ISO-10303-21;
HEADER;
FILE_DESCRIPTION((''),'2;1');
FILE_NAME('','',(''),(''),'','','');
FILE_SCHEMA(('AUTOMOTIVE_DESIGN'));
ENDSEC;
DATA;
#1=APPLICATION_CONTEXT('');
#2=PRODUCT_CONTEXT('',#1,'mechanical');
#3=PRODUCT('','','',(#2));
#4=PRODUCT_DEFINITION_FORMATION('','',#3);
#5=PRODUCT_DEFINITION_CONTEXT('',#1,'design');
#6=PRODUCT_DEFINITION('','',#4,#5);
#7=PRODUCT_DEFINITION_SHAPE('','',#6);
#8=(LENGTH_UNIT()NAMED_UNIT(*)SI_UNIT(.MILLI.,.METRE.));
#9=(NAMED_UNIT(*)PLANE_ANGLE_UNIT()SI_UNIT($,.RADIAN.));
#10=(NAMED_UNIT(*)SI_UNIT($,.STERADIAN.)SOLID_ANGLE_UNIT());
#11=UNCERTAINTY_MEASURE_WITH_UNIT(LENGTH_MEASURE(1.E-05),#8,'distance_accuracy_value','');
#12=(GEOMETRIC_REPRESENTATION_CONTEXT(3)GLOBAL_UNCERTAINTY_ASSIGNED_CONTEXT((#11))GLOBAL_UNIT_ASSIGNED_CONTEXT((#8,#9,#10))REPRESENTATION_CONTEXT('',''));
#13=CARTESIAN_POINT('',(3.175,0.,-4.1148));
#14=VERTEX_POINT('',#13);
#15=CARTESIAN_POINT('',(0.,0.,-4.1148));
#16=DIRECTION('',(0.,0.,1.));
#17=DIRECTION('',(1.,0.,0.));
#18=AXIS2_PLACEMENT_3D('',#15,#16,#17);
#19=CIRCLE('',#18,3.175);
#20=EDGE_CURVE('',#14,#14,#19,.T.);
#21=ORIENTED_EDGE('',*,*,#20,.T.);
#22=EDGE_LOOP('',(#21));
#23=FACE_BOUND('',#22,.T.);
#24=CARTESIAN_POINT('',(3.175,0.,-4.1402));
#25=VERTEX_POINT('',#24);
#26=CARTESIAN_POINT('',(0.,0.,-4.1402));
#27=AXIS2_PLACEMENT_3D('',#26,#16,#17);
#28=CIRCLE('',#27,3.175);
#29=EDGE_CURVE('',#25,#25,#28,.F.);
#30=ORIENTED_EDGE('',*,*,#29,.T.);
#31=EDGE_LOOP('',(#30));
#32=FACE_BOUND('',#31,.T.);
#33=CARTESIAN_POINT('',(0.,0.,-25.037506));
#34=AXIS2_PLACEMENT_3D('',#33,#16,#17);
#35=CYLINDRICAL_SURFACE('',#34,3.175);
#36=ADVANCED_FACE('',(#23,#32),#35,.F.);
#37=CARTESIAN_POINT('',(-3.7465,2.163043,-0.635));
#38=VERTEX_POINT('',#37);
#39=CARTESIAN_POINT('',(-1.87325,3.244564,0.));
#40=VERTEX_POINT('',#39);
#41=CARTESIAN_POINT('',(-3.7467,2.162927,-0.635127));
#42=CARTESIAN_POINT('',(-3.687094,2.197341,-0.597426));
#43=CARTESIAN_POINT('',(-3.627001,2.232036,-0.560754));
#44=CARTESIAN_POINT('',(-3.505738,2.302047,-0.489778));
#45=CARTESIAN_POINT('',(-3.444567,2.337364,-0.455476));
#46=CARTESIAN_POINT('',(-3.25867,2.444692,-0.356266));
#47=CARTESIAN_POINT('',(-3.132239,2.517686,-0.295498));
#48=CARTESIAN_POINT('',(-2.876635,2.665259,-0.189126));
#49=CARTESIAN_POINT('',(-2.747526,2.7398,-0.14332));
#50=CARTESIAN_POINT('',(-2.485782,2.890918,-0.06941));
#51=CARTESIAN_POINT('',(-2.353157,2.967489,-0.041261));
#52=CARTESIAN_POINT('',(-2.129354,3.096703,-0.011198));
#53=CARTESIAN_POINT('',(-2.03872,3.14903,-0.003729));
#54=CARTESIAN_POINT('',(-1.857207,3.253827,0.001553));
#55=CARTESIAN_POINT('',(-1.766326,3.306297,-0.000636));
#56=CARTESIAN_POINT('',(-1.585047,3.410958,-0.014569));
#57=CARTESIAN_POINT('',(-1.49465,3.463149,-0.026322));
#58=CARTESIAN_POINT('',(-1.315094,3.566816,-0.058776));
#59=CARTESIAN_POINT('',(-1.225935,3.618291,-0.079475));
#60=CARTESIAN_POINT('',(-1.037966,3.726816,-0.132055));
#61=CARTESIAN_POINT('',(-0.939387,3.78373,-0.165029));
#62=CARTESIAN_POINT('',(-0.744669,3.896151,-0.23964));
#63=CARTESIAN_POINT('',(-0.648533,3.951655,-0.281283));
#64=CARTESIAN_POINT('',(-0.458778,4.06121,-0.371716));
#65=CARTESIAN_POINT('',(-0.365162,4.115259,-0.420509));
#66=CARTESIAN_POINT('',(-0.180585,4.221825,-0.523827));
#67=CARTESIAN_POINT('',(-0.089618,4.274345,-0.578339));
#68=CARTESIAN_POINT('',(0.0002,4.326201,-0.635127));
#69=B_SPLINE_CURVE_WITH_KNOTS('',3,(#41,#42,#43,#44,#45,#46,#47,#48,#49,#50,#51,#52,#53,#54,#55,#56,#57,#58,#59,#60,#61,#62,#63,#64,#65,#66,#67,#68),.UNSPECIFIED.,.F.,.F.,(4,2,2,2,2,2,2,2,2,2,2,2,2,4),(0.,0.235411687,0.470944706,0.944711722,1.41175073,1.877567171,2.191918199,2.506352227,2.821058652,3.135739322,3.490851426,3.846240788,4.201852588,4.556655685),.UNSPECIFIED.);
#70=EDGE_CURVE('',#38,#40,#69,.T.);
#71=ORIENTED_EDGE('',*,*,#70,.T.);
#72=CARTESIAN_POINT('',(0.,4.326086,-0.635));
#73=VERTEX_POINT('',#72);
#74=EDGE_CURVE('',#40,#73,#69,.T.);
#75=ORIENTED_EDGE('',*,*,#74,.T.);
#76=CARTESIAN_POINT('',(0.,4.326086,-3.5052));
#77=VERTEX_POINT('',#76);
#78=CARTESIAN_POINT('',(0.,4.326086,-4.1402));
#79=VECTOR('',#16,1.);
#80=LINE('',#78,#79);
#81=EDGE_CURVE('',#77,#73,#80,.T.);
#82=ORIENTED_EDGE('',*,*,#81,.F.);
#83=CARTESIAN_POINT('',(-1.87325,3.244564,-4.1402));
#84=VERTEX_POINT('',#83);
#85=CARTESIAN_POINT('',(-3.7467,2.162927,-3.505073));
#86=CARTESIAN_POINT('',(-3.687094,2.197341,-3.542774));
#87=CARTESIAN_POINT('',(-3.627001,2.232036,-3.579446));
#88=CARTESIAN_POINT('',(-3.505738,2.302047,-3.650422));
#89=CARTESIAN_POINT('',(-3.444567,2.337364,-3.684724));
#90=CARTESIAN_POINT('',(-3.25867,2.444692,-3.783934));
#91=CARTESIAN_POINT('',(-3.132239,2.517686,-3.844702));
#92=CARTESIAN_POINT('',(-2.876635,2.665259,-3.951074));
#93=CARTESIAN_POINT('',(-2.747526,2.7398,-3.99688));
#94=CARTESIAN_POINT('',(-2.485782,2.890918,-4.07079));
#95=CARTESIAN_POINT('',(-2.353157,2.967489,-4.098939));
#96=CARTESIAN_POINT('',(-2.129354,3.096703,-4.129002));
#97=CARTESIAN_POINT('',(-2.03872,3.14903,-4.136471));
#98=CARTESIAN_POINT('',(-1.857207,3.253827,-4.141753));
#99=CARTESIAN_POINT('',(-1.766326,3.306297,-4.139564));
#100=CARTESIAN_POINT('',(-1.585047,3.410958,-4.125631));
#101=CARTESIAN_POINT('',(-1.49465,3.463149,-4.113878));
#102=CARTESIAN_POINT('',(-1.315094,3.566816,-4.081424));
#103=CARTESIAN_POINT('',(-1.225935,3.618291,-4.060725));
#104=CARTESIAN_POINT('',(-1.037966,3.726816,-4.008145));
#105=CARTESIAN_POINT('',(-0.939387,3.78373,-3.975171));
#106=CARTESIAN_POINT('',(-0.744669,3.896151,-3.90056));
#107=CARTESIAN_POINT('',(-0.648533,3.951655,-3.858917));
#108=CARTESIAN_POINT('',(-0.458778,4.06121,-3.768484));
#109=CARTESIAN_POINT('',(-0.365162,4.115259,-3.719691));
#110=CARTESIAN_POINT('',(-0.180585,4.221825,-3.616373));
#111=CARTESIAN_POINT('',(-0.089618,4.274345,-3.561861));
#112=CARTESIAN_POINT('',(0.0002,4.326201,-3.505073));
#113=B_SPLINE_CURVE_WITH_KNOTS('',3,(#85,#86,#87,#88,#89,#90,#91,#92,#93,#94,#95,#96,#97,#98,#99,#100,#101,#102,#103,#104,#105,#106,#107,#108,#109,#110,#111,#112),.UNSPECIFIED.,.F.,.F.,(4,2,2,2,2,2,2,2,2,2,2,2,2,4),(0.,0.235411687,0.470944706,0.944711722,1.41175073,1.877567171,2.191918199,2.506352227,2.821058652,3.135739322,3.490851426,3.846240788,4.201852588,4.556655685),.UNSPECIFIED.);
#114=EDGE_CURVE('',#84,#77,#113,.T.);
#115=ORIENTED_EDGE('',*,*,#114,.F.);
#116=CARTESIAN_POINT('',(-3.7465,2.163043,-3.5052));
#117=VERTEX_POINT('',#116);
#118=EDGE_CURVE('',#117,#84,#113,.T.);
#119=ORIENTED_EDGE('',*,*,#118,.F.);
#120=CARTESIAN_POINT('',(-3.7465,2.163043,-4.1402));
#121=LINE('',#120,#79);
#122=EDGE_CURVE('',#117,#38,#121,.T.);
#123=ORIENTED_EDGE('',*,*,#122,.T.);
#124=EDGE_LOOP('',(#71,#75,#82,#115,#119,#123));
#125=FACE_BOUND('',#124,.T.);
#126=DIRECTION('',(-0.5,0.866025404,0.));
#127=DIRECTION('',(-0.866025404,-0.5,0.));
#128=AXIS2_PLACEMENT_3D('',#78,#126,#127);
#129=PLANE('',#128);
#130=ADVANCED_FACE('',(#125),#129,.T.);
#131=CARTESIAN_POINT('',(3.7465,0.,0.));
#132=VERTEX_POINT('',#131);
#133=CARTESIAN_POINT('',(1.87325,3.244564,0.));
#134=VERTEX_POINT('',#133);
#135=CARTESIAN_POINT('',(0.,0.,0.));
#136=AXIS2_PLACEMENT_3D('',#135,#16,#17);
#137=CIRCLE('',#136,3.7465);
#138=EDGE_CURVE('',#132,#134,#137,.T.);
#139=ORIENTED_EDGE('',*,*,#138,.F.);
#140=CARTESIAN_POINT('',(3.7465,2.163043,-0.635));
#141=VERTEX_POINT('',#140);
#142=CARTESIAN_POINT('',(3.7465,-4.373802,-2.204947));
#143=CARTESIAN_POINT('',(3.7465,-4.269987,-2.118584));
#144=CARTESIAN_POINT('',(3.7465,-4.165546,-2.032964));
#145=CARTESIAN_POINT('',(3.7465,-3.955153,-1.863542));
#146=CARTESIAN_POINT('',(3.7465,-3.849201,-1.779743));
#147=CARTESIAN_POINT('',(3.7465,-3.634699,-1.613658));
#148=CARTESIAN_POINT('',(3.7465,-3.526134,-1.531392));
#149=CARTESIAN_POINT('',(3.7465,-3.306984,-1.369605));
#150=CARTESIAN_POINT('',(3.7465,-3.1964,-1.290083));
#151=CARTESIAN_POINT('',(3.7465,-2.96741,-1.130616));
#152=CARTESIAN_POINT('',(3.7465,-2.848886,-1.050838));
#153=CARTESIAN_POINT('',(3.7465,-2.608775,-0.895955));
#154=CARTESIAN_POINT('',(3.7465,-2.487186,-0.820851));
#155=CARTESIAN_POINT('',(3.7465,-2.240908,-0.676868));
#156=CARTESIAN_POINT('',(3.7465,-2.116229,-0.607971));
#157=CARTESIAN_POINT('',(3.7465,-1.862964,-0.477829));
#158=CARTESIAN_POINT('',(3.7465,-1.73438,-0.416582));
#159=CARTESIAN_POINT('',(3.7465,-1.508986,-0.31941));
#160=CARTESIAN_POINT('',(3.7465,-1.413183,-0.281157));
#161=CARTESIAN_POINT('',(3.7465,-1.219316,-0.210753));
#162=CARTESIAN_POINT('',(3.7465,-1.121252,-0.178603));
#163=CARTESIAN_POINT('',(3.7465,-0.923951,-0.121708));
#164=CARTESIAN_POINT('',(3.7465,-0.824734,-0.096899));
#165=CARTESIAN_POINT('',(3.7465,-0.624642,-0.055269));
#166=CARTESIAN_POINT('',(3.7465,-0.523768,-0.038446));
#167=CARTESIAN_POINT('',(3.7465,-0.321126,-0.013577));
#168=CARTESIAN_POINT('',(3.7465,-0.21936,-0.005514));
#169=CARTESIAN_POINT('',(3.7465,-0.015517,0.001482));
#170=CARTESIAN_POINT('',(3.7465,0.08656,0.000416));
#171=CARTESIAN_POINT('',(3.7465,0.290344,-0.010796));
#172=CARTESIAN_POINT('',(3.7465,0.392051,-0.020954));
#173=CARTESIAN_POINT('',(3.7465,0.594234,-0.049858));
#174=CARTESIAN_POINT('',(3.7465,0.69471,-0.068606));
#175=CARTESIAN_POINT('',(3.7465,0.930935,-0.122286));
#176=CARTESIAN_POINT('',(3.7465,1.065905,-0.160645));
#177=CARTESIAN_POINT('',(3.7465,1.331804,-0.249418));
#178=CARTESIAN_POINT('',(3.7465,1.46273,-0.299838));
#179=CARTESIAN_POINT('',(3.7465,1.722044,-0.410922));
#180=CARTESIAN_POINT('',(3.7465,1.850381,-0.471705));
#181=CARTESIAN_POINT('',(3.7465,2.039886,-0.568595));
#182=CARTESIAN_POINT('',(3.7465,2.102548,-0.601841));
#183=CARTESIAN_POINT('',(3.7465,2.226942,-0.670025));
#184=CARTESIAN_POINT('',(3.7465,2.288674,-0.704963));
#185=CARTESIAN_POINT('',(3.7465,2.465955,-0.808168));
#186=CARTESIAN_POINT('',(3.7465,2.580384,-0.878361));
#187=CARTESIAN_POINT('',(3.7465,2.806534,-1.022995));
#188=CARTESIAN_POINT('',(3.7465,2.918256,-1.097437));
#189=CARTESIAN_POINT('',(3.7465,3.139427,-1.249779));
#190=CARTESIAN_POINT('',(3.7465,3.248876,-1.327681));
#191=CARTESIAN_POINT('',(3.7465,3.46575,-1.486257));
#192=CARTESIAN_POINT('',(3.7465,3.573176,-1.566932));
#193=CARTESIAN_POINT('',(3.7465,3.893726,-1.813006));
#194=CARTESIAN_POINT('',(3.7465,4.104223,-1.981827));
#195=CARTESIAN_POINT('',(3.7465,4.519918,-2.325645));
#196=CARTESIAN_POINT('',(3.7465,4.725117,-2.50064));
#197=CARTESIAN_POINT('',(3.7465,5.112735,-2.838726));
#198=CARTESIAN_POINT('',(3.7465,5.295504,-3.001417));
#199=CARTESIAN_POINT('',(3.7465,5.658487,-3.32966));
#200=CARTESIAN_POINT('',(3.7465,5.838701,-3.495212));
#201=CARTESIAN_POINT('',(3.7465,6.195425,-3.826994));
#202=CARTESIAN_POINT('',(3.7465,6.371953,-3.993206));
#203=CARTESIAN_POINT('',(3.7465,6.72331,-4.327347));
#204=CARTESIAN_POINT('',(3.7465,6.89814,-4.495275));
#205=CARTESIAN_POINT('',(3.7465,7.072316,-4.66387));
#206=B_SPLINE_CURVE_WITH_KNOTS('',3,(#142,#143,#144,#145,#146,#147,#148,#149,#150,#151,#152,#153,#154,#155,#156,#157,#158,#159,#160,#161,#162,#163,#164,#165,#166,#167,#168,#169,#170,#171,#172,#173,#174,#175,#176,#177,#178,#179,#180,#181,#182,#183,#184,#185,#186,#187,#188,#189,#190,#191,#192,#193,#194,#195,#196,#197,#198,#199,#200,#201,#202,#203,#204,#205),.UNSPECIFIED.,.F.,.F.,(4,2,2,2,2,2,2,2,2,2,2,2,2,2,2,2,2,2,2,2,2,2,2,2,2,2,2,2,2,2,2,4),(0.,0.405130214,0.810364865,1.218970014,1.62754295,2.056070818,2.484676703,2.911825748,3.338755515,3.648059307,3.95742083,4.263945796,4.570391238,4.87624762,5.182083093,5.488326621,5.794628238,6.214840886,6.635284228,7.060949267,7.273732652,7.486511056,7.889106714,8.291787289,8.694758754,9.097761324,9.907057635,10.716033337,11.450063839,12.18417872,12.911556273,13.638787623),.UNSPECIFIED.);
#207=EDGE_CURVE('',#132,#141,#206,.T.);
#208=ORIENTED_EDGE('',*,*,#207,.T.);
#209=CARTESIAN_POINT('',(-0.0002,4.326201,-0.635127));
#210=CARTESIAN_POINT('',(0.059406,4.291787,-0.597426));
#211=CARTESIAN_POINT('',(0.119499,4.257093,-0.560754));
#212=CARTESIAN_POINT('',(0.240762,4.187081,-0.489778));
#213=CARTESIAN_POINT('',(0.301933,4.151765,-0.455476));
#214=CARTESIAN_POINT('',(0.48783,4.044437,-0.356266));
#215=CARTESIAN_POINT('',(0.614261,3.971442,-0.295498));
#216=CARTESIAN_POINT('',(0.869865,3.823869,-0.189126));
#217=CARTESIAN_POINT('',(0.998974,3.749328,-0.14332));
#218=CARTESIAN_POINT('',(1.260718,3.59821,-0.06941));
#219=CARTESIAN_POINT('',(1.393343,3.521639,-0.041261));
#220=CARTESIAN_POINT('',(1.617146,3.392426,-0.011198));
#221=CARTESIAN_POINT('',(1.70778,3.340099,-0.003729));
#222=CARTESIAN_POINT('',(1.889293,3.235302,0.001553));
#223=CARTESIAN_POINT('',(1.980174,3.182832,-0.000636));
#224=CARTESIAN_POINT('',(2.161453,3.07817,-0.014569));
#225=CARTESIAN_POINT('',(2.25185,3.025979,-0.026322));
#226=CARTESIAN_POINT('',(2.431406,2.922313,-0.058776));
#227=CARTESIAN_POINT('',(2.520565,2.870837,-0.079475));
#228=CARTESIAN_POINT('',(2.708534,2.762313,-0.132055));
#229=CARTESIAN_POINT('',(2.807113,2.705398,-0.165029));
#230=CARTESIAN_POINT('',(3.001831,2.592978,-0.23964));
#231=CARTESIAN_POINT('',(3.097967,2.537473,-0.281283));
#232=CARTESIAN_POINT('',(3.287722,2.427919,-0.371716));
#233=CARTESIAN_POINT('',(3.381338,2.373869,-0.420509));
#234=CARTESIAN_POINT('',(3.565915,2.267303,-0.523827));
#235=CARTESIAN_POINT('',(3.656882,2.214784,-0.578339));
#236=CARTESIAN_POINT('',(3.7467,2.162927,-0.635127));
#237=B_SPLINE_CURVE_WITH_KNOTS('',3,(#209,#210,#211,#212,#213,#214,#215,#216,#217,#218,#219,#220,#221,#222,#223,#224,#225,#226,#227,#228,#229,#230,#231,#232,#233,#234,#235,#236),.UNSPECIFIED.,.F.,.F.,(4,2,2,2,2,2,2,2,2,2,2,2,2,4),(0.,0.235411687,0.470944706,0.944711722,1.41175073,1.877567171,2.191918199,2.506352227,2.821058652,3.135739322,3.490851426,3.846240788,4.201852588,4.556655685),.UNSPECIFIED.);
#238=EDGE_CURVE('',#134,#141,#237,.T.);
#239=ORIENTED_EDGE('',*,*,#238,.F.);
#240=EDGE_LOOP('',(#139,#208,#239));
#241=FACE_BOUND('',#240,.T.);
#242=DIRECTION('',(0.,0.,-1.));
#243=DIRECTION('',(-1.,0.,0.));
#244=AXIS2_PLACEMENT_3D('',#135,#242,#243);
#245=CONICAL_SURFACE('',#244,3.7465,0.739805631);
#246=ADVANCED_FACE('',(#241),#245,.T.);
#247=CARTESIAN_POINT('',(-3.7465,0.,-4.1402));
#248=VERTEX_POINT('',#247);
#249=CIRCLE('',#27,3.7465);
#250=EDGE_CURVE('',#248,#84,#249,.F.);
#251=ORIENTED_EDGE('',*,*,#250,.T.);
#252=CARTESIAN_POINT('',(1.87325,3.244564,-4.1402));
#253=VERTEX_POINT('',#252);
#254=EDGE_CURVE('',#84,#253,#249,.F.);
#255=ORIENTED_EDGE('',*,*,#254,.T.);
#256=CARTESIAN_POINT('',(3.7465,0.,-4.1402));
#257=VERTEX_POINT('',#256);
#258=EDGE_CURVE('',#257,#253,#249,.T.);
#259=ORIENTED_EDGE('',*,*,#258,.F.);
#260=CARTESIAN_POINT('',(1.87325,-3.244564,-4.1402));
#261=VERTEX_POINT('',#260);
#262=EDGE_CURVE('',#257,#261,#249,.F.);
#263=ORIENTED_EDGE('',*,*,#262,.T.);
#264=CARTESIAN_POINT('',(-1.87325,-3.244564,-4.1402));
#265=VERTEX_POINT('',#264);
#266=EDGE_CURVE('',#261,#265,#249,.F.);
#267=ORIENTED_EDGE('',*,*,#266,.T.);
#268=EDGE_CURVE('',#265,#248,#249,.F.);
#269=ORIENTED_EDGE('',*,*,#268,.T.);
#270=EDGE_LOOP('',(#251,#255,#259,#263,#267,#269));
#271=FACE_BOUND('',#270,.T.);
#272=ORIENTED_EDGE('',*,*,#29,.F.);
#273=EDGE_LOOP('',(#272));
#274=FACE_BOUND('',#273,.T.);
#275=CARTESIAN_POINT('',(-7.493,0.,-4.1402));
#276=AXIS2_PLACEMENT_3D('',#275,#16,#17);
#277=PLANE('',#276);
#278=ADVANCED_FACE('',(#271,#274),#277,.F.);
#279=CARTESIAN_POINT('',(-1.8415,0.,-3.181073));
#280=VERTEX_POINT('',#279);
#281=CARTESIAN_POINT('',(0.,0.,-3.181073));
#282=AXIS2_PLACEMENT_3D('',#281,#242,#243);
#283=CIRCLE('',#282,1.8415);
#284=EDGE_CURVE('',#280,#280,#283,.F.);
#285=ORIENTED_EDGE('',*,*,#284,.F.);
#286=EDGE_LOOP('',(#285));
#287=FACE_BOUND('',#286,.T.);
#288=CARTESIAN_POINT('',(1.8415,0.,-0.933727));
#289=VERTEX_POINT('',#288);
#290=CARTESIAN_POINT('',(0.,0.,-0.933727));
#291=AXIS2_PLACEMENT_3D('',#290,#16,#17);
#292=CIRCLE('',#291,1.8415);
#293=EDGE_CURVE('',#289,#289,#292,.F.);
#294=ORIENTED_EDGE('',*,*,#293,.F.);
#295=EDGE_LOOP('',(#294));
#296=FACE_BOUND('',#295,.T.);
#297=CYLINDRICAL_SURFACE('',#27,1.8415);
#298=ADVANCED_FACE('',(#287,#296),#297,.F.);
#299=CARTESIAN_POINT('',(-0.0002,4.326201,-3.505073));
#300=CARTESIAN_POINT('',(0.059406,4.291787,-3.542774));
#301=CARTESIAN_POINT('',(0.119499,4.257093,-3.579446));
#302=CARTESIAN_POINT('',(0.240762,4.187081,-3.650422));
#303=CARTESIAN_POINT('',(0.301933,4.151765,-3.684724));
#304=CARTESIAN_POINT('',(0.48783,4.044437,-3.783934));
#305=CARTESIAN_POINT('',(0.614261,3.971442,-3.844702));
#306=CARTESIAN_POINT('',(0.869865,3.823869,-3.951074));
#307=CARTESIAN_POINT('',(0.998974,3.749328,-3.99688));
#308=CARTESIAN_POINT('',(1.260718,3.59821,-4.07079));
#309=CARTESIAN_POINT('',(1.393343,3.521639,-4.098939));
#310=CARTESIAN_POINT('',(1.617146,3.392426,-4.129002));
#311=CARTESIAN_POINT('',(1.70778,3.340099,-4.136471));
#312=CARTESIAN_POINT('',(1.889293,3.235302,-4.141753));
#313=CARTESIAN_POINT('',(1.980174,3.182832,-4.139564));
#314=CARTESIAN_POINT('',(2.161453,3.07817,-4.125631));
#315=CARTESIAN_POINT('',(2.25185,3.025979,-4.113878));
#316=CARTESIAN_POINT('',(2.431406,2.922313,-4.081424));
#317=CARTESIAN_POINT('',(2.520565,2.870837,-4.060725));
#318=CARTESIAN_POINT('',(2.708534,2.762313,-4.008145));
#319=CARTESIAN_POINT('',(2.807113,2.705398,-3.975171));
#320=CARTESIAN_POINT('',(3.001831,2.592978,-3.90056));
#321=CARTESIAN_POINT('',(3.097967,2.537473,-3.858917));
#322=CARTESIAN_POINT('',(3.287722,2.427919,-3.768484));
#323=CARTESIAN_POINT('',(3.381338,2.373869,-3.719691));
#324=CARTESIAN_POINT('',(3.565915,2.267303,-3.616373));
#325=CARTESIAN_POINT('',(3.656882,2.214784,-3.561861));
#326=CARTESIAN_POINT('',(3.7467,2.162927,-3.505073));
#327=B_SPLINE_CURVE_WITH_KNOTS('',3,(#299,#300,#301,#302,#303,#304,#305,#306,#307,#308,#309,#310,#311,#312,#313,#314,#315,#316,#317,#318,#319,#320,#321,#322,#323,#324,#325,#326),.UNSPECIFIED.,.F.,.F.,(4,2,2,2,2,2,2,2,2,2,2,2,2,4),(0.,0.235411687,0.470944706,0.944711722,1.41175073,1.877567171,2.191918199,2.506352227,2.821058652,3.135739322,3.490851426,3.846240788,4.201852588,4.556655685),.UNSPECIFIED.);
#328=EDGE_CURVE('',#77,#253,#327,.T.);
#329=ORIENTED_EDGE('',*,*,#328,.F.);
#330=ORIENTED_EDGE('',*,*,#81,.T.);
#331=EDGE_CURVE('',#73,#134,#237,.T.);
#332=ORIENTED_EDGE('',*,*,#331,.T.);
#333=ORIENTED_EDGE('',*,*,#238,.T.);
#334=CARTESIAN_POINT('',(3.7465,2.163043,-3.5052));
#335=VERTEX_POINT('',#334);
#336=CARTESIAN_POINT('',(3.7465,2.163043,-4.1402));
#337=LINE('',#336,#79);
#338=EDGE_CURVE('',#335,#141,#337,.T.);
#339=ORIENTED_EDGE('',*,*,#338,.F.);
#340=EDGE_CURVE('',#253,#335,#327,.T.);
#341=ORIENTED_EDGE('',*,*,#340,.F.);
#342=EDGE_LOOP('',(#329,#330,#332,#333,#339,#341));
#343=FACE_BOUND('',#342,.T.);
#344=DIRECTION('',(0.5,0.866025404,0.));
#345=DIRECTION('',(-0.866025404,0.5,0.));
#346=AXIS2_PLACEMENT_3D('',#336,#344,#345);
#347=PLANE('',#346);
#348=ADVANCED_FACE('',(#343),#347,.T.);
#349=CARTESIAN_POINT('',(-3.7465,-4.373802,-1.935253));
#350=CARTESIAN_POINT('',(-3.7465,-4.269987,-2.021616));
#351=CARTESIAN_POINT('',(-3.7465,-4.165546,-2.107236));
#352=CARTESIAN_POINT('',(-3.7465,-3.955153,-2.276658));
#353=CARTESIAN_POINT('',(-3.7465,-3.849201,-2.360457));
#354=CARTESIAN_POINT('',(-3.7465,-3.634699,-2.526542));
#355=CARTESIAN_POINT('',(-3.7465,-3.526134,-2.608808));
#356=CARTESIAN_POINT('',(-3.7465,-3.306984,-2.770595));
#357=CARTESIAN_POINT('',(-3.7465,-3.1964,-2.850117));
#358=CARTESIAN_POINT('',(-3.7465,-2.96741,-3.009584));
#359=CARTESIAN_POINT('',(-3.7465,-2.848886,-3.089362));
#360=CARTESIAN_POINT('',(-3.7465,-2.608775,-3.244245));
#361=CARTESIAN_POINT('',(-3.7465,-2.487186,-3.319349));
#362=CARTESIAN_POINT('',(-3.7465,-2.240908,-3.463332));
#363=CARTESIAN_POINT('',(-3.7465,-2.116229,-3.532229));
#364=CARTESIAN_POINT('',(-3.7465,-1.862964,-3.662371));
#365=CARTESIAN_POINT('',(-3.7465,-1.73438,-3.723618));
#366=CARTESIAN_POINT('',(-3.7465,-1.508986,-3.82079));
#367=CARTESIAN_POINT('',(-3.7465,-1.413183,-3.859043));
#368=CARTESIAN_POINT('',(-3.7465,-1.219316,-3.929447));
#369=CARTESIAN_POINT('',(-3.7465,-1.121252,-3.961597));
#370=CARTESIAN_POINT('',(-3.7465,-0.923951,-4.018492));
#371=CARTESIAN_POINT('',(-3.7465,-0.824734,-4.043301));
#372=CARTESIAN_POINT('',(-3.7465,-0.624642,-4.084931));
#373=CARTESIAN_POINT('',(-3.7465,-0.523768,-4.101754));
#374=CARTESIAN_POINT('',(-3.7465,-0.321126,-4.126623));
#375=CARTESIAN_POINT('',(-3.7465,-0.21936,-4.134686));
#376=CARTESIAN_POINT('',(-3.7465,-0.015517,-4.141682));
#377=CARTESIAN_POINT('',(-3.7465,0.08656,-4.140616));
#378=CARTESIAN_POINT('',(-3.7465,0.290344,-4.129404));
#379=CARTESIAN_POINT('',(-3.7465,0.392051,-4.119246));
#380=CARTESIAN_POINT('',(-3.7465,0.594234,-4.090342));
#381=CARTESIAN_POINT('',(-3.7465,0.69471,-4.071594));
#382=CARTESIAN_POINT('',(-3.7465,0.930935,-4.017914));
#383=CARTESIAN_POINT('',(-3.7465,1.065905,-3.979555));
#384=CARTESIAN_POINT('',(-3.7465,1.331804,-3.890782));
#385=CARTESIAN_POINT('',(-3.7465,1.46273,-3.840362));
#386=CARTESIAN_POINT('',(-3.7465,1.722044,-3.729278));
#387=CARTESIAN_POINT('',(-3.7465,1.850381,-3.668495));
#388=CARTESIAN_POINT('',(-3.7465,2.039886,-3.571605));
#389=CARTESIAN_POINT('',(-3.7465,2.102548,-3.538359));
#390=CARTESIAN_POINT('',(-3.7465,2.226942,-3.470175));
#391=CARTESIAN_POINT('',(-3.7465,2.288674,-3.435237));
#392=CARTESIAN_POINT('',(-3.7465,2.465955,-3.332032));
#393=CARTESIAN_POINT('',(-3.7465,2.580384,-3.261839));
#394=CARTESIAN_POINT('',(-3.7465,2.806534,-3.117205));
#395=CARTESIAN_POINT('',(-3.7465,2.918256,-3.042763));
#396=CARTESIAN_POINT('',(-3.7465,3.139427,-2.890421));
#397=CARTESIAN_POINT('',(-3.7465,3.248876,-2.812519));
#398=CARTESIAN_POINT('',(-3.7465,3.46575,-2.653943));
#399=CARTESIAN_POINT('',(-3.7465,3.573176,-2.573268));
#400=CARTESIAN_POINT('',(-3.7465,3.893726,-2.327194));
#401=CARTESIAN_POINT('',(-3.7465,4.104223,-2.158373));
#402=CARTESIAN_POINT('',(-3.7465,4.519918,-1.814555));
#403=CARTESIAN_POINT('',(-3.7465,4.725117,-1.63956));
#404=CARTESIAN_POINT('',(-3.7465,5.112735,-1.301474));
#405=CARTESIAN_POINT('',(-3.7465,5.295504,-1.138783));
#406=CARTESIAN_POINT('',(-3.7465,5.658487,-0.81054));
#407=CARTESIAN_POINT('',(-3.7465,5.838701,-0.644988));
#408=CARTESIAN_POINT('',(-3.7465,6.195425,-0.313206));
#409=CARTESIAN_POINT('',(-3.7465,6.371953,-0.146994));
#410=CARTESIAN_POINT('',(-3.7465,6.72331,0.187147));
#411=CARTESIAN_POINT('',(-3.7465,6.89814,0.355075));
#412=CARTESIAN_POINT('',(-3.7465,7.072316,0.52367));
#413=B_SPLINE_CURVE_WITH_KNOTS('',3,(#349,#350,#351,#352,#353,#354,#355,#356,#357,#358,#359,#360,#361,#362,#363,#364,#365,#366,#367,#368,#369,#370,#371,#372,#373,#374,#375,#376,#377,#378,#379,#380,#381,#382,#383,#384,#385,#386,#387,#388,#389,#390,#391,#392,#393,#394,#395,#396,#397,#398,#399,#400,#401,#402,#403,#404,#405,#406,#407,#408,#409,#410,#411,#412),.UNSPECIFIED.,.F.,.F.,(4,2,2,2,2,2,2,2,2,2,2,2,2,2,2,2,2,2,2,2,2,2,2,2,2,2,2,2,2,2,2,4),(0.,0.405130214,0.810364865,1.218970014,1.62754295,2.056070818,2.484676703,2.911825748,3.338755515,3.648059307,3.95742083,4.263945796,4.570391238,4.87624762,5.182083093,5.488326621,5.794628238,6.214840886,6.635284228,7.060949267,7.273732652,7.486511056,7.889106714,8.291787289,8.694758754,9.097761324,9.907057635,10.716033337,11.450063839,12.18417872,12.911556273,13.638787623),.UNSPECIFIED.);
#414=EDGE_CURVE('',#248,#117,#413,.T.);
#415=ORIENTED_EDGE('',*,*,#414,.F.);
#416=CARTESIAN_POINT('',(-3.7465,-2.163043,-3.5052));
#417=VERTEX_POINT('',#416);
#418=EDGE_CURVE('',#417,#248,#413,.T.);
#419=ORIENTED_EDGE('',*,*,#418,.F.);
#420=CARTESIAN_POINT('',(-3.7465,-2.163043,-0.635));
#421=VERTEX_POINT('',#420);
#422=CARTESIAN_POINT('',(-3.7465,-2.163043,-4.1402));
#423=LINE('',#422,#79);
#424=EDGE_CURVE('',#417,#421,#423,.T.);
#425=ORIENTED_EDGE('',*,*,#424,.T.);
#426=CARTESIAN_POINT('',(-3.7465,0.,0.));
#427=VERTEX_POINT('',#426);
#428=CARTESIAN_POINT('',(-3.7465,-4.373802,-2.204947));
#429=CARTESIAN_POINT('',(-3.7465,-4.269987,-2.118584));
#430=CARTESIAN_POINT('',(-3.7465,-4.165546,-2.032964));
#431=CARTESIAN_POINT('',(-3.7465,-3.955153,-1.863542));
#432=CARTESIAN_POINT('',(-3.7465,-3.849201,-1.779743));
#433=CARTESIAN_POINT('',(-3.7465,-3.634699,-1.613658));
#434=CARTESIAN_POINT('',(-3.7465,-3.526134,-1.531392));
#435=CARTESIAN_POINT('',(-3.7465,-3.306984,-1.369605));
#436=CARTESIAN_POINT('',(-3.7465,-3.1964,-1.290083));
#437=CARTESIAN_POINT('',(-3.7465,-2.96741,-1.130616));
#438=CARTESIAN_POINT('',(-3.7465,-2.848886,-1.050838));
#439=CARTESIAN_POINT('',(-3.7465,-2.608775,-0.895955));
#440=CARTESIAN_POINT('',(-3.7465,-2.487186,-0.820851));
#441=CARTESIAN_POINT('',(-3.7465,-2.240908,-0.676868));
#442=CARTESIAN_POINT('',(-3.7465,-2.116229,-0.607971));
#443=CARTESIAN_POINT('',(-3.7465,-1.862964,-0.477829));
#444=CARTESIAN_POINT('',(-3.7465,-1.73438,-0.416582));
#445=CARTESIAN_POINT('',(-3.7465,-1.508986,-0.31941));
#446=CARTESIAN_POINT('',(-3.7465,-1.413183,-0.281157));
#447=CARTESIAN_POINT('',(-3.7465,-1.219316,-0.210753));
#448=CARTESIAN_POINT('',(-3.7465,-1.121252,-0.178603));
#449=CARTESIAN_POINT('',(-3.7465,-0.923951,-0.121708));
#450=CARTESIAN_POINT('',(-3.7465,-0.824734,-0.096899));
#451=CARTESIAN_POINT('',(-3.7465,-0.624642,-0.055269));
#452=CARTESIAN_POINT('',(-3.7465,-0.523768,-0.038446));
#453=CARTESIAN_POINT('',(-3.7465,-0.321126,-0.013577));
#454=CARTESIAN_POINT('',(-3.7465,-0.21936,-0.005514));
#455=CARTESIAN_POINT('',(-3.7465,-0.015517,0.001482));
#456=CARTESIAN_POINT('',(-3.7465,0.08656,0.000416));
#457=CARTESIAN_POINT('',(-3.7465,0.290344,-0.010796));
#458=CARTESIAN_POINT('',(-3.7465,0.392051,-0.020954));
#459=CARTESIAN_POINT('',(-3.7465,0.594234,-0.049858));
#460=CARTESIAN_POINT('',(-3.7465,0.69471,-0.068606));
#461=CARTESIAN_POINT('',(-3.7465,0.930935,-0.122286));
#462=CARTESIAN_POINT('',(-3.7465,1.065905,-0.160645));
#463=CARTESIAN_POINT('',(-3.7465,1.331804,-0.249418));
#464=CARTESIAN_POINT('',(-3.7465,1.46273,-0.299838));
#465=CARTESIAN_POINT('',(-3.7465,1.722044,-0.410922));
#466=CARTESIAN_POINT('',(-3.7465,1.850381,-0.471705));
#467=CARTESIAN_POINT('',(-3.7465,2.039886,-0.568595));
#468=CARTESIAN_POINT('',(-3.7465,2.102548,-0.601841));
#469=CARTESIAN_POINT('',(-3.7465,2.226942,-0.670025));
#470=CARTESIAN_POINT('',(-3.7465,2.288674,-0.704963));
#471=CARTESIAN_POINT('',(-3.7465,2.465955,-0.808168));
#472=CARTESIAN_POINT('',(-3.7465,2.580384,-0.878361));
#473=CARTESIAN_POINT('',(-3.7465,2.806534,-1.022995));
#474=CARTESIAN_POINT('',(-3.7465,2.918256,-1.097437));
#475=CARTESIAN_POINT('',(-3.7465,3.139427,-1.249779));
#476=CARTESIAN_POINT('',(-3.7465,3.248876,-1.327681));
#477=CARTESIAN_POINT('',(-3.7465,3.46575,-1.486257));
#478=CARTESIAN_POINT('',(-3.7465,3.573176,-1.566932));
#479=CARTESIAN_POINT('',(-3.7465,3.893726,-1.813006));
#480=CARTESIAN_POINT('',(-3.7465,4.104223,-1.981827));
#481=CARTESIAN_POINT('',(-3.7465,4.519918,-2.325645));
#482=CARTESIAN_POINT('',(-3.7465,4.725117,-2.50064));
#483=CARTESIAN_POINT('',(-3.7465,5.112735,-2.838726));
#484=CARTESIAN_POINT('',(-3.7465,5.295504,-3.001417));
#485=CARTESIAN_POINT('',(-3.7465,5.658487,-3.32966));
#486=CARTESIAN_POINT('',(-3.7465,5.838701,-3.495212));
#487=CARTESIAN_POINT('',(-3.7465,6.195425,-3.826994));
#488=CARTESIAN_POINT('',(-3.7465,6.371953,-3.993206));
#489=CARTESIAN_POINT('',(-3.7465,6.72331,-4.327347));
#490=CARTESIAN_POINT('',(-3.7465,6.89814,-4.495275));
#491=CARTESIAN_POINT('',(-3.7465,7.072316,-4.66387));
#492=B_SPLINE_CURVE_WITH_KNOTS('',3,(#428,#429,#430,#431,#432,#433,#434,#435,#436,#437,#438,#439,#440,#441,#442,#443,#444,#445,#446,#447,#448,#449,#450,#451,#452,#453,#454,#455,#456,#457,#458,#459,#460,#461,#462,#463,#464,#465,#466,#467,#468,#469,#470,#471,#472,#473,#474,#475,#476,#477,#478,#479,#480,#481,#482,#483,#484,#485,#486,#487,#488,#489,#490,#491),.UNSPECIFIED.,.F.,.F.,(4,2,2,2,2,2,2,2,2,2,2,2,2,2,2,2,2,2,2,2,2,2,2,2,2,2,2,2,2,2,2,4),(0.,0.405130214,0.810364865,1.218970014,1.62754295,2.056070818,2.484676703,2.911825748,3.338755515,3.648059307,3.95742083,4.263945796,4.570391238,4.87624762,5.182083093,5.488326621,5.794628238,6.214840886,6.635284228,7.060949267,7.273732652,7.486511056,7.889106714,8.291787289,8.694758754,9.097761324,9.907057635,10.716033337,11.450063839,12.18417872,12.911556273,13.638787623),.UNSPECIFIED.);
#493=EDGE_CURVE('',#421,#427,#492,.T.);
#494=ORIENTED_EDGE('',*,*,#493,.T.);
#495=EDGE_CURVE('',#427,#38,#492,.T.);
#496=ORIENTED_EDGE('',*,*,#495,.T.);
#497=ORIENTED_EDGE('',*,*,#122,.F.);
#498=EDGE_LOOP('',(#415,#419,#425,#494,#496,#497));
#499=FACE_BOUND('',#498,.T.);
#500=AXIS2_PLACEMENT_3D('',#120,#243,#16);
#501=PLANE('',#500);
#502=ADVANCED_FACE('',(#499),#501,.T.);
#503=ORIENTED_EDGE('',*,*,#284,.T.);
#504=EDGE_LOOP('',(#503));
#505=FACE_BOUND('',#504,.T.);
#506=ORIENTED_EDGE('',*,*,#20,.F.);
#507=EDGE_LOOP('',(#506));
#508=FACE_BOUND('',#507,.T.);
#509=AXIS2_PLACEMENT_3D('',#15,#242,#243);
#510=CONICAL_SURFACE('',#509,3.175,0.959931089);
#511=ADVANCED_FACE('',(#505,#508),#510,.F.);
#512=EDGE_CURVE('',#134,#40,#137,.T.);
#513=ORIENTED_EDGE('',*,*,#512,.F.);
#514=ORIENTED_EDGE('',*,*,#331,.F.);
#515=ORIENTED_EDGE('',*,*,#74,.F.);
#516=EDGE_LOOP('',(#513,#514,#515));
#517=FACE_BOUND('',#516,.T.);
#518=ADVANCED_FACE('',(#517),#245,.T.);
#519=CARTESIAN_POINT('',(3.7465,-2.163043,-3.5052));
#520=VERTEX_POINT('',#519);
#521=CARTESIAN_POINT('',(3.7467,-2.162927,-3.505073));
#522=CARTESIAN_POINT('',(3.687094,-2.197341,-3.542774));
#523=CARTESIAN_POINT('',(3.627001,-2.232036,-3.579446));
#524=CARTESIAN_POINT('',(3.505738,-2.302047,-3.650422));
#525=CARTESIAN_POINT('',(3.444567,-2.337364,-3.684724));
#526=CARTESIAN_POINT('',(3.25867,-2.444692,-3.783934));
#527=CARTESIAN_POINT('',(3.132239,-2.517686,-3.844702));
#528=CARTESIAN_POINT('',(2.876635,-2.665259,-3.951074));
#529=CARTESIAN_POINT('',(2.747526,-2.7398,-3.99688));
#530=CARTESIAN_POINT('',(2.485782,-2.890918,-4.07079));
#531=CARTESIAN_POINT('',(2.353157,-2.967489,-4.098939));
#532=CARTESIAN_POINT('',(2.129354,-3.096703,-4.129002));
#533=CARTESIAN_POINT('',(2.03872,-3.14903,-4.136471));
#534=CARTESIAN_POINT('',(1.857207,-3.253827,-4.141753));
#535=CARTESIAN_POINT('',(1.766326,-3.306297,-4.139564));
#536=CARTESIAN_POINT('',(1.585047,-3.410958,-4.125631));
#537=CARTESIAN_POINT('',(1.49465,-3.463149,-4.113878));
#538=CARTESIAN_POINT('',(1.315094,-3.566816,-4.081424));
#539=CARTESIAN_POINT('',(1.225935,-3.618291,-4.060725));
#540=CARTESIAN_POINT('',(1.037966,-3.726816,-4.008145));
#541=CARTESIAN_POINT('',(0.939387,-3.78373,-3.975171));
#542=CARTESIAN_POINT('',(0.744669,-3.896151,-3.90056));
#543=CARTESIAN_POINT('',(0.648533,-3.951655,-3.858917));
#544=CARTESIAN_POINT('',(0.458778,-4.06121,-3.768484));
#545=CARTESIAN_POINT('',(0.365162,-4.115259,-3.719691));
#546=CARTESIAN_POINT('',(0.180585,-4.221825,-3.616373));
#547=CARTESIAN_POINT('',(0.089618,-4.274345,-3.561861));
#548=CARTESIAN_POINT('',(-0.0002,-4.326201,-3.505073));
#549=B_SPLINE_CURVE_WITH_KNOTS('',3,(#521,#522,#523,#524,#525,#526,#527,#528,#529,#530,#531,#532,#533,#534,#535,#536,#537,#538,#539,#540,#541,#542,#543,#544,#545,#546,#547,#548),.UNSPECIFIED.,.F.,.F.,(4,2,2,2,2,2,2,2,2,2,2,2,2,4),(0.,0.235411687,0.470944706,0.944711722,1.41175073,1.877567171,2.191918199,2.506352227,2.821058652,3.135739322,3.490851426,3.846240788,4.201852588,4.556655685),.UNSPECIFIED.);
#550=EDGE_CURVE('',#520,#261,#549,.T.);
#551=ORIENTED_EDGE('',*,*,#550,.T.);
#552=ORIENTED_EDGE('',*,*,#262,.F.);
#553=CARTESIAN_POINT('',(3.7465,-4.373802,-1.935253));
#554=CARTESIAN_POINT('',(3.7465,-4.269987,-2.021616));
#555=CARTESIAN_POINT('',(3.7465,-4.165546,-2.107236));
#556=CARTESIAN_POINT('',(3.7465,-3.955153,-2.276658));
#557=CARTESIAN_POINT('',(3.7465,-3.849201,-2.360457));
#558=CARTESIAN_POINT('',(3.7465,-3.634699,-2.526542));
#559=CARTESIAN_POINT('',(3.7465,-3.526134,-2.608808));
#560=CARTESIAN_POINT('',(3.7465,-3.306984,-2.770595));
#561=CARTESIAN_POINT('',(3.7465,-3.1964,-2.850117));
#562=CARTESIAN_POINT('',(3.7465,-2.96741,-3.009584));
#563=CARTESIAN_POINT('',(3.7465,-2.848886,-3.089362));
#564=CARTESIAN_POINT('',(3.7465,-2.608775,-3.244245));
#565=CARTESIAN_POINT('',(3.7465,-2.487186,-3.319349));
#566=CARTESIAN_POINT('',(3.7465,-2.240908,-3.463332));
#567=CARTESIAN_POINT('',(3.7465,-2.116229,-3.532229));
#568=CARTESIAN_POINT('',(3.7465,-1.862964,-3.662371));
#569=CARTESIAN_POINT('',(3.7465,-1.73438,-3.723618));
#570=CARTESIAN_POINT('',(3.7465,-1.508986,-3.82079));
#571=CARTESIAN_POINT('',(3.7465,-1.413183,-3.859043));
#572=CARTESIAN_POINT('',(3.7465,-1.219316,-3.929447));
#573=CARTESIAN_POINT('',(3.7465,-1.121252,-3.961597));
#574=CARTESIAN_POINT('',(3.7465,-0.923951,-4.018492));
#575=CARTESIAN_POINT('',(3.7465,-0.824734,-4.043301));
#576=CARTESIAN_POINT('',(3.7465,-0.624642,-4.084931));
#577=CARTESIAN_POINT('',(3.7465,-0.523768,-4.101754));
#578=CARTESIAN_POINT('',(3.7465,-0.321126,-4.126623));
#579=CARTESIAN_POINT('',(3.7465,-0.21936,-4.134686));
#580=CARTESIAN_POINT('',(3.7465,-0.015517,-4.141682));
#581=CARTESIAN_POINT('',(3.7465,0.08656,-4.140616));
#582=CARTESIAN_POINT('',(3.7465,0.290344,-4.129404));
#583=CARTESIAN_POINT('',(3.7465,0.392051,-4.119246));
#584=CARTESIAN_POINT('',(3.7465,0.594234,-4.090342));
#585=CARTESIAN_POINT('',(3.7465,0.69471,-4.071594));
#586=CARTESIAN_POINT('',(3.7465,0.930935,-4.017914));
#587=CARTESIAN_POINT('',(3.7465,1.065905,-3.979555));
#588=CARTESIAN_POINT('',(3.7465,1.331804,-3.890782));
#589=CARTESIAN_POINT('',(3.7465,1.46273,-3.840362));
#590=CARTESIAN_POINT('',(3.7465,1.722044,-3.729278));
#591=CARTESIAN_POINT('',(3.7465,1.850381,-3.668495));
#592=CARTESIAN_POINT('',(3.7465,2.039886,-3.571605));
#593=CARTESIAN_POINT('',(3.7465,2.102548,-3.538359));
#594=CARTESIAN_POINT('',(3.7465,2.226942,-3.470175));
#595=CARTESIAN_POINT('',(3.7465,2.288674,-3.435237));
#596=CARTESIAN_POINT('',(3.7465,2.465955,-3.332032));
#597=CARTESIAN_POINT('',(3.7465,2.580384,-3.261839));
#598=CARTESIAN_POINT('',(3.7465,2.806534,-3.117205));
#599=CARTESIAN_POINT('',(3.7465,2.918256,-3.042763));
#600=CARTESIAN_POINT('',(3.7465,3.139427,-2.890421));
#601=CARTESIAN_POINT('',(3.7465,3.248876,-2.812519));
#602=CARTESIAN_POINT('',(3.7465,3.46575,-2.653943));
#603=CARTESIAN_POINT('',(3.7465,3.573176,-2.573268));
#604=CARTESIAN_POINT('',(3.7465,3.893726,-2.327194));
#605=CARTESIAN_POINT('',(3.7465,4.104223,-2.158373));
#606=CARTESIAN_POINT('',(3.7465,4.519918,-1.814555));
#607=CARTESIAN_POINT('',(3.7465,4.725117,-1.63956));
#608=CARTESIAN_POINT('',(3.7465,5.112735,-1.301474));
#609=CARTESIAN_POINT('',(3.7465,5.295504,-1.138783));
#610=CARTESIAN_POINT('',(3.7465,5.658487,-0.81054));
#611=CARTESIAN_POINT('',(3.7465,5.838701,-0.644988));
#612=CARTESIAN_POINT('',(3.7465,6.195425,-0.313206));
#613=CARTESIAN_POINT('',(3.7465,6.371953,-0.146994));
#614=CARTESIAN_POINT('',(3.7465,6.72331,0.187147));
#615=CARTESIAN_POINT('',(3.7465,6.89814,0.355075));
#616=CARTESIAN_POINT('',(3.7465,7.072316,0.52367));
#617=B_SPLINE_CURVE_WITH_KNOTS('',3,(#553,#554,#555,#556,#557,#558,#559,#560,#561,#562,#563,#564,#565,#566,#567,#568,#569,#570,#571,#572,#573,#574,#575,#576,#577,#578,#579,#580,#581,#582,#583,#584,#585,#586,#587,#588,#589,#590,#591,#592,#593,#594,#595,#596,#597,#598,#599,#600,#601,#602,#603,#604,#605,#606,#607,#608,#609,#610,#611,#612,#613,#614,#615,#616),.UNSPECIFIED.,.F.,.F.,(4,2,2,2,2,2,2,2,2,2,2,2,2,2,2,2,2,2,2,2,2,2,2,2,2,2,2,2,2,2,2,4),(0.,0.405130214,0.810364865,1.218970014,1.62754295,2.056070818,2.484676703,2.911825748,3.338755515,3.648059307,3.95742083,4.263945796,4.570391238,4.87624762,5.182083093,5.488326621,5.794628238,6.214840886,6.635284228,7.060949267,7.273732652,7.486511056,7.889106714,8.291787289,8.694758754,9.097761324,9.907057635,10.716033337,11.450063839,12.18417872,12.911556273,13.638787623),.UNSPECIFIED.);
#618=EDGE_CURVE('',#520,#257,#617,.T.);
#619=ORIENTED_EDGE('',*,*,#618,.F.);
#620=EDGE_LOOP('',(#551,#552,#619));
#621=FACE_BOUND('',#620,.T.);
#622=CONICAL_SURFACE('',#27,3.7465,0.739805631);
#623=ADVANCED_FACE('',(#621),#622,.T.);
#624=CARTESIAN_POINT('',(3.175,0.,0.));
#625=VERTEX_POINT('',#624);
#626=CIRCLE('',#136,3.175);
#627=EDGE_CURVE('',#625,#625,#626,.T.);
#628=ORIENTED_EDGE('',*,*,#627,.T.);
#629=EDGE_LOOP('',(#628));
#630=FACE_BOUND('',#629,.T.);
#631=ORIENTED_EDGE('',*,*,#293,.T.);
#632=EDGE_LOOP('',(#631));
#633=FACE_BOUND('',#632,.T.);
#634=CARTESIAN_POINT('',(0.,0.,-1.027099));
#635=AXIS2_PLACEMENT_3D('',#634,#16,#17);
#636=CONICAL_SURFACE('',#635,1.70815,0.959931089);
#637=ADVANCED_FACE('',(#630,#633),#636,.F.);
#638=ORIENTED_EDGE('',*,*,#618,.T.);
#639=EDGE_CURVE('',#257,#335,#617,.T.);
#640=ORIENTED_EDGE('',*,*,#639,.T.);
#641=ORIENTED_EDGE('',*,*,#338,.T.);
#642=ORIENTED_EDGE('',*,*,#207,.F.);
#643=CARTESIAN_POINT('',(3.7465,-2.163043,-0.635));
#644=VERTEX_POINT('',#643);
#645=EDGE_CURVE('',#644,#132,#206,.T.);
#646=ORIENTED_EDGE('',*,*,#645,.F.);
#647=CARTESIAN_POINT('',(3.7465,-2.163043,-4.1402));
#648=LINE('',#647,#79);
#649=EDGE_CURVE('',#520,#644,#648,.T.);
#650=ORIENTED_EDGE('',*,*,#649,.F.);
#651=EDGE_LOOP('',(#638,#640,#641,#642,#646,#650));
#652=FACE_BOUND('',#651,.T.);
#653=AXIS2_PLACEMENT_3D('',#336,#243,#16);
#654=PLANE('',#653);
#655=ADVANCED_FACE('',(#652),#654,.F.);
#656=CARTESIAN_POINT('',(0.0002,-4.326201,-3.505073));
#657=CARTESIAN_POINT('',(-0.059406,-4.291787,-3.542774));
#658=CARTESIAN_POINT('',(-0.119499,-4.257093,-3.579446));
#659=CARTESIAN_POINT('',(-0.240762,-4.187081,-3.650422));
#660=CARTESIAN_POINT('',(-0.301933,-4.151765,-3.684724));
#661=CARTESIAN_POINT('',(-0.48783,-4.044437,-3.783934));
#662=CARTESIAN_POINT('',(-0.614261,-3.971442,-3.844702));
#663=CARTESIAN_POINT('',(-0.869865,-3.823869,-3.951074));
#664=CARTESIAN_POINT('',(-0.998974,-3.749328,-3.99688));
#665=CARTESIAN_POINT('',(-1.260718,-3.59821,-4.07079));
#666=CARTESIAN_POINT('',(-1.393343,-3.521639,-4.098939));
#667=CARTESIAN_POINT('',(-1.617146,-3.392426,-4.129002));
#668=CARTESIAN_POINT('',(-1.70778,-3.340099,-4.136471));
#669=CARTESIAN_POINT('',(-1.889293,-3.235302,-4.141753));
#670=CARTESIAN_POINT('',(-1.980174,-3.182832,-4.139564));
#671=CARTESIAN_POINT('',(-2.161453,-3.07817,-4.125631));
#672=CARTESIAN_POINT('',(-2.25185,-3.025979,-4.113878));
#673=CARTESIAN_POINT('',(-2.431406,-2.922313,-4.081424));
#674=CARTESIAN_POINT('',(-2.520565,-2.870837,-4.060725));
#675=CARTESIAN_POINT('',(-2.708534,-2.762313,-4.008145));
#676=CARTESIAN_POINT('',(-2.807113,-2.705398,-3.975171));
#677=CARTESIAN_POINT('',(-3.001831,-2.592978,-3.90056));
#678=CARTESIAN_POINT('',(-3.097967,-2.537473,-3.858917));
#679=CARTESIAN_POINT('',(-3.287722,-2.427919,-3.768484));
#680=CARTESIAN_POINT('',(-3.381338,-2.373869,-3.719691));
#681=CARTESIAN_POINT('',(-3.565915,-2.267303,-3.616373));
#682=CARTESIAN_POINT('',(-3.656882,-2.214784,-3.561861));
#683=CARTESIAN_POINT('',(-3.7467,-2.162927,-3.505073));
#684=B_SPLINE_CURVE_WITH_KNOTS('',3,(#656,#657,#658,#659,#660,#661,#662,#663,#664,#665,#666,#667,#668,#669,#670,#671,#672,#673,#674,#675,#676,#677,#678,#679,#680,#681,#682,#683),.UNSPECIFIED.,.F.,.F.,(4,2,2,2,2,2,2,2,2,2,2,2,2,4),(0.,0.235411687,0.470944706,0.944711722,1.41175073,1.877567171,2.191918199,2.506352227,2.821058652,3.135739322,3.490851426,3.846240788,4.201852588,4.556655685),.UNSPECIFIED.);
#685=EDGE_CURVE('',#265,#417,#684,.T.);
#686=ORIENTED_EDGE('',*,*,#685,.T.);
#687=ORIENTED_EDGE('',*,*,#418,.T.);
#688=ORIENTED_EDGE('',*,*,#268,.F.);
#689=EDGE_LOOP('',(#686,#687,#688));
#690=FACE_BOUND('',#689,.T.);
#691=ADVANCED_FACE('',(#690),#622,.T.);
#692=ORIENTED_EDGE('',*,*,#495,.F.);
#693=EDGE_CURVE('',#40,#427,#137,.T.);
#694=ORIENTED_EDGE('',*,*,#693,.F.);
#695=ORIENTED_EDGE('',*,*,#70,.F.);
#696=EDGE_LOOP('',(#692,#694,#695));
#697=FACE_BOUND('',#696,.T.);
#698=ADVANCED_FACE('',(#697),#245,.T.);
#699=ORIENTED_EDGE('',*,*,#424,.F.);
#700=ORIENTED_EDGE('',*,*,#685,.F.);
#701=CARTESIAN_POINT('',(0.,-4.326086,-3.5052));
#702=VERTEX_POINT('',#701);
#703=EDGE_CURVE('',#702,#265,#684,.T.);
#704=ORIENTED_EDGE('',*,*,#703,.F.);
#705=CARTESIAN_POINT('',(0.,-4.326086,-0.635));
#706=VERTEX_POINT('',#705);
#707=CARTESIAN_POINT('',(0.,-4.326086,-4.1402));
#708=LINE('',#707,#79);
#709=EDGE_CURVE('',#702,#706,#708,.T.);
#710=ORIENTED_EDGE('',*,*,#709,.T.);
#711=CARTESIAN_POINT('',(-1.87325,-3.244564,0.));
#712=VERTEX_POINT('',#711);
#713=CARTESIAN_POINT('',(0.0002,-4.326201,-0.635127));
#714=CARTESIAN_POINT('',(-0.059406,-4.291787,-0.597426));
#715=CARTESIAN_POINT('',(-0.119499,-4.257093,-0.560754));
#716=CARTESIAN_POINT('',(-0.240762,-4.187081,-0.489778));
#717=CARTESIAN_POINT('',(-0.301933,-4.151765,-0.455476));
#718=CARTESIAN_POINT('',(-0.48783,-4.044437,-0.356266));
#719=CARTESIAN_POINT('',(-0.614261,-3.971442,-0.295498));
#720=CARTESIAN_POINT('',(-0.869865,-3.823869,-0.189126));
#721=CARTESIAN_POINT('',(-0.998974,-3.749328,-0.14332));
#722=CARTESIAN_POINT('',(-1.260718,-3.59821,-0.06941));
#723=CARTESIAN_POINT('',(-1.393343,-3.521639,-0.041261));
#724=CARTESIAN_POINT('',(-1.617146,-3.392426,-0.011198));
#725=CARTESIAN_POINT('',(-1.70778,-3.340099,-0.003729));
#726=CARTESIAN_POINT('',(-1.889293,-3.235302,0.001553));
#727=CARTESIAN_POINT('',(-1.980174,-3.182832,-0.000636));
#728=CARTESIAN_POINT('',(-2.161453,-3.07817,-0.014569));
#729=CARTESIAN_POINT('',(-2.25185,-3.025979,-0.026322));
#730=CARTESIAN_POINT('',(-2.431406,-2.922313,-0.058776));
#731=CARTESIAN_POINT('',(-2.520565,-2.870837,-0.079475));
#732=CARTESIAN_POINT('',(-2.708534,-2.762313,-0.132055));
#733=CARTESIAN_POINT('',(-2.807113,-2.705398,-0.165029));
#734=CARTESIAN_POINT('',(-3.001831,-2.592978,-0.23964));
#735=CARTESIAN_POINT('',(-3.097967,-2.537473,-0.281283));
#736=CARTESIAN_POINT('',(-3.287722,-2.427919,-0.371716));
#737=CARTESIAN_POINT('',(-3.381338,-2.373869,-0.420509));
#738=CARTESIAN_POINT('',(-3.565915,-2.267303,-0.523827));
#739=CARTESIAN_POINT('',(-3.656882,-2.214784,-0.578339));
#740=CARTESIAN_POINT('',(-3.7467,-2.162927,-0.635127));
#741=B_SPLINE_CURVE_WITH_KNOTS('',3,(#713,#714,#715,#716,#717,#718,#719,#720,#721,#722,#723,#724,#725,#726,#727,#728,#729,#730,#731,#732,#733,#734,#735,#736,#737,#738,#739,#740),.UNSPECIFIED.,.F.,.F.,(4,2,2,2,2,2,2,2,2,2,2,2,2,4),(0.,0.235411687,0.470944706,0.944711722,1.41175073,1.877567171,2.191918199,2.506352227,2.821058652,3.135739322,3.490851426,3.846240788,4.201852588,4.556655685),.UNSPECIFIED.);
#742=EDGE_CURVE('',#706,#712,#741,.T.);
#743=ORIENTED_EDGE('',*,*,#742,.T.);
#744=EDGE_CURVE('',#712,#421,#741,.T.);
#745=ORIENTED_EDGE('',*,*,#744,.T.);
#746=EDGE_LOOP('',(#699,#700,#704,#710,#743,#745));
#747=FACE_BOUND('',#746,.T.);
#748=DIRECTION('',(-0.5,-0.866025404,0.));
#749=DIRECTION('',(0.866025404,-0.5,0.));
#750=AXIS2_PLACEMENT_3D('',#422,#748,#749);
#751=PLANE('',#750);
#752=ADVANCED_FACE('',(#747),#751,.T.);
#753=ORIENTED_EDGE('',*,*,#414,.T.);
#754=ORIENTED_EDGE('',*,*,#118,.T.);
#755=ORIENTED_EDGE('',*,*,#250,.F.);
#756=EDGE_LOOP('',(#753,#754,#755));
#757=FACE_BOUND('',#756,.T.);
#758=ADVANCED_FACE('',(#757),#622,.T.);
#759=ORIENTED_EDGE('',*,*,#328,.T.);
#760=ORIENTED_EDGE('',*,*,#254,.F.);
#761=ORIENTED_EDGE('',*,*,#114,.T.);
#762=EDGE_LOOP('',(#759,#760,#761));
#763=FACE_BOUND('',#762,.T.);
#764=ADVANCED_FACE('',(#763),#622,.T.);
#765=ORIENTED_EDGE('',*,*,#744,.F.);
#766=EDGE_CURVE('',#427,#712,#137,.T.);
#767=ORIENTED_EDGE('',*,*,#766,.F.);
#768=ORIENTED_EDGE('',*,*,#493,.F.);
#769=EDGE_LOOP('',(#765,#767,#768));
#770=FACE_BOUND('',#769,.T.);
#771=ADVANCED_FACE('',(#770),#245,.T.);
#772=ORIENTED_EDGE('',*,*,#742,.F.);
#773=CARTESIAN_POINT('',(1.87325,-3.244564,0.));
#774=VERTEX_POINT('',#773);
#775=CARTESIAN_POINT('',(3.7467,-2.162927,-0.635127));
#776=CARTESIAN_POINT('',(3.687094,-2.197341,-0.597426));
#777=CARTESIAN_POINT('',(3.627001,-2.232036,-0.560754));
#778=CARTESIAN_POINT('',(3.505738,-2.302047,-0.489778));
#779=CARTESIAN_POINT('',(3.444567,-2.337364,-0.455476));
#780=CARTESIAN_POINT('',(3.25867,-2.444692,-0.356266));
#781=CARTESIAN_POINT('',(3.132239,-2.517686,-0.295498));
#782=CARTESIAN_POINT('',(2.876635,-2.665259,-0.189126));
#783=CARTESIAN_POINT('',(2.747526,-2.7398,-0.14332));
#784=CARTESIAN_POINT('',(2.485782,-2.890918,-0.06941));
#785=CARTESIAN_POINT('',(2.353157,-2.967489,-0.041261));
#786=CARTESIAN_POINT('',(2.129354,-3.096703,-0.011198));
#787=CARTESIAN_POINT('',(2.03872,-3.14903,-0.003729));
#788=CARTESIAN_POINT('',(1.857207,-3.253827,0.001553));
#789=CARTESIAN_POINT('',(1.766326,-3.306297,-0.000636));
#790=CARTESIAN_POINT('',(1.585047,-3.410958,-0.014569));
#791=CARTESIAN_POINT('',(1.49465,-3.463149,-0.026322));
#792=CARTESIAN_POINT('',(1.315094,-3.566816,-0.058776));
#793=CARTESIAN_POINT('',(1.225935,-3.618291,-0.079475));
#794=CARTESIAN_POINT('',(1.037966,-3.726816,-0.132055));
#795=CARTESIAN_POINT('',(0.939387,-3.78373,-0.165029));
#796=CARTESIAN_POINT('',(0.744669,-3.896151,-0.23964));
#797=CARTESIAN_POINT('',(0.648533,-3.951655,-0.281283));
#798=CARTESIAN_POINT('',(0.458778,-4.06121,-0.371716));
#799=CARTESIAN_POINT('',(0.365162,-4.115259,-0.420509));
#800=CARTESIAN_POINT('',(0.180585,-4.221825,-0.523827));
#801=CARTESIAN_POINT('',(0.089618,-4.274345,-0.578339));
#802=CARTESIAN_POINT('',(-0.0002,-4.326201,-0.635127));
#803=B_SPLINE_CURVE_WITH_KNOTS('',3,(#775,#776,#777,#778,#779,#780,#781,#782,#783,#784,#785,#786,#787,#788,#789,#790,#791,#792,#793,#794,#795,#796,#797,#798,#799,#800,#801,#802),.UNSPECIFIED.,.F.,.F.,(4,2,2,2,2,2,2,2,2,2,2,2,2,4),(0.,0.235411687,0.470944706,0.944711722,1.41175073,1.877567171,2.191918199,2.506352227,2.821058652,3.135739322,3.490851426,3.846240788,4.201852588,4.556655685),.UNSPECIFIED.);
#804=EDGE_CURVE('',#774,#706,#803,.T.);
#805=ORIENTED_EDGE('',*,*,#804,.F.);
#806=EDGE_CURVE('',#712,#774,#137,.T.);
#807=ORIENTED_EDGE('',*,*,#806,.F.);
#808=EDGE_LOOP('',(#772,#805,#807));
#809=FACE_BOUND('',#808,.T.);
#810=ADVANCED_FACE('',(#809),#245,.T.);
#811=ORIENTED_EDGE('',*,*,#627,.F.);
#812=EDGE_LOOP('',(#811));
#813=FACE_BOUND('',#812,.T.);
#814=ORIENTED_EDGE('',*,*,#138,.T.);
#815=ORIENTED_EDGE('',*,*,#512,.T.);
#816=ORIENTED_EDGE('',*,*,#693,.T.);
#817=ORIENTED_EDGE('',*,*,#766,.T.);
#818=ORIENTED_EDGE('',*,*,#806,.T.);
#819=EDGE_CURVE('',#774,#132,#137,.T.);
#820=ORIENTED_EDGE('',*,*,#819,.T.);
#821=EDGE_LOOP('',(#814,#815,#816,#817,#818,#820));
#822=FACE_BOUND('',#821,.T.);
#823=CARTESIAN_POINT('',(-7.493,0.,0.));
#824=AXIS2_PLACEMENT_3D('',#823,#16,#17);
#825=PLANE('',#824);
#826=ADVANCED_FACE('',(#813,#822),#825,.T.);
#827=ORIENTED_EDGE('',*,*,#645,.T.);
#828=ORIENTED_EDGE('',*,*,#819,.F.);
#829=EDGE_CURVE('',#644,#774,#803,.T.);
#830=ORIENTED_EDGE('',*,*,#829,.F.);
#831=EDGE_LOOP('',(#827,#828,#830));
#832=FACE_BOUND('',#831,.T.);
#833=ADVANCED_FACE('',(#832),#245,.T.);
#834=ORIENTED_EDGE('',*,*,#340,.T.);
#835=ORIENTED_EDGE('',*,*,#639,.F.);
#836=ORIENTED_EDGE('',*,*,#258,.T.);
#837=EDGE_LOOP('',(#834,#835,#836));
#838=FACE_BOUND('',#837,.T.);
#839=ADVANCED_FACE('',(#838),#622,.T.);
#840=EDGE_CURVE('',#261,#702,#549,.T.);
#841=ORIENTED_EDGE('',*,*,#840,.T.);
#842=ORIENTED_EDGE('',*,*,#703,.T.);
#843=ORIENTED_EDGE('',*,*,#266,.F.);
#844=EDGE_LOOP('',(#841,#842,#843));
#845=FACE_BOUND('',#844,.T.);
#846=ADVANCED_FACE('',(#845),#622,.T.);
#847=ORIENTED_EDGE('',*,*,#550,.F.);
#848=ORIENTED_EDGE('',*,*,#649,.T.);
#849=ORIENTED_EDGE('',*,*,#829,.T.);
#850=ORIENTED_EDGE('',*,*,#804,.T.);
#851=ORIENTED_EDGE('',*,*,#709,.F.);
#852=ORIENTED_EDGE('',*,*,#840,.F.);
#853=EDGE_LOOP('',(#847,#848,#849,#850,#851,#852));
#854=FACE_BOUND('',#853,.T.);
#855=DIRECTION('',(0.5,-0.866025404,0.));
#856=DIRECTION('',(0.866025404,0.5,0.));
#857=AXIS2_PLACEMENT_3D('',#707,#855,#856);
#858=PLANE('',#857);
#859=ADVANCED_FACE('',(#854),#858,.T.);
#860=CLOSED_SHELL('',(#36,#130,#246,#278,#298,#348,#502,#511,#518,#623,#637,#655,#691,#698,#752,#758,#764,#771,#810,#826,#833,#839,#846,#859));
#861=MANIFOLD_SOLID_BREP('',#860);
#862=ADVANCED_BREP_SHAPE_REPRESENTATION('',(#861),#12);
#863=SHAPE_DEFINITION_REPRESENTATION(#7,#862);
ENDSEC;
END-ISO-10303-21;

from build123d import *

# Parameters (mm, degrees)
THREADSCHEMATIC_START     = -4.1402
THREADSCHEMATIC_OUTLINE_R = 1.8415
THREADSCHEMATIC_DEPTH     = 4.1402


# Read off the part's stored shape, not the designer's step: ThreadSchematic
with BuildPart() as part:
    # ThreadSchematic outline → ThreadSchematic (new body)
    with BuildSketch(Plane.XY.offset(THREADSCHEMATIC_START)):
        Polygon((3.7465, 2.163042784), (0, 4.326085567), (-3.7465, 2.163042784), (-3.7465, -2.163042784), (0, -4.326085567), (3.7465, -2.163042784), align=None)
        Circle(THREADSCHEMATIC_OUTLINE_R, mode=Mode.SUBTRACT)
    extrude(amount=THREADSCHEMATIC_DEPTH)

    # Sketch3 → Double-Chamfer (revolve, cut)
    with BuildSketch(Plane(origin=(0, 0, 0), x_dir=(0, 0, -1), z_dir=(1, 0, 0))):
        Polygon((4.1402, 3.7465), (3.5052, 4.326085567), (3.5052, 17.026085567), (16.8402, 17.026085567), (16.8402, 3.7465), align=None)
        Polygon((0.635, 17.026085567), (-12.7, 17.026085567), (-12.7, 3.7465), (0, 3.7465), (0.635, 4.326085567), align=None)
    revolve(axis=Axis((0, 0, 0), (0, 0, -1)), mode=Mode.SUBTRACT)

    # EndChamferSke → EndChamfer (revolve, cut)
    with BuildSketch(Plane(origin=(0, 0, 0), x_dir=(0, 0, -1), z_dir=(1, 0, 0)), mode=Mode.PRIVATE) as endchamfer_sk:
        Polygon((4.1148, 3.175), (3.087700573, 1.70815), (4.1656, 1.70815), (4.1656, 3.175), align=None)
        Polygon((-0.0508, 3.175), (0, 3.175), (1.027099427, 1.70815), (-0.0508, 1.70815), align=None)
    revolve(endchamfer_sk.sketch.rotate(Axis((0, 0, -25.037505729), (0, 0, -1)), 90), axis=Axis((0, 0, -25.037505729), (0, 0, -1)), mode=Mode.SUBTRACT)


solid = part.part
